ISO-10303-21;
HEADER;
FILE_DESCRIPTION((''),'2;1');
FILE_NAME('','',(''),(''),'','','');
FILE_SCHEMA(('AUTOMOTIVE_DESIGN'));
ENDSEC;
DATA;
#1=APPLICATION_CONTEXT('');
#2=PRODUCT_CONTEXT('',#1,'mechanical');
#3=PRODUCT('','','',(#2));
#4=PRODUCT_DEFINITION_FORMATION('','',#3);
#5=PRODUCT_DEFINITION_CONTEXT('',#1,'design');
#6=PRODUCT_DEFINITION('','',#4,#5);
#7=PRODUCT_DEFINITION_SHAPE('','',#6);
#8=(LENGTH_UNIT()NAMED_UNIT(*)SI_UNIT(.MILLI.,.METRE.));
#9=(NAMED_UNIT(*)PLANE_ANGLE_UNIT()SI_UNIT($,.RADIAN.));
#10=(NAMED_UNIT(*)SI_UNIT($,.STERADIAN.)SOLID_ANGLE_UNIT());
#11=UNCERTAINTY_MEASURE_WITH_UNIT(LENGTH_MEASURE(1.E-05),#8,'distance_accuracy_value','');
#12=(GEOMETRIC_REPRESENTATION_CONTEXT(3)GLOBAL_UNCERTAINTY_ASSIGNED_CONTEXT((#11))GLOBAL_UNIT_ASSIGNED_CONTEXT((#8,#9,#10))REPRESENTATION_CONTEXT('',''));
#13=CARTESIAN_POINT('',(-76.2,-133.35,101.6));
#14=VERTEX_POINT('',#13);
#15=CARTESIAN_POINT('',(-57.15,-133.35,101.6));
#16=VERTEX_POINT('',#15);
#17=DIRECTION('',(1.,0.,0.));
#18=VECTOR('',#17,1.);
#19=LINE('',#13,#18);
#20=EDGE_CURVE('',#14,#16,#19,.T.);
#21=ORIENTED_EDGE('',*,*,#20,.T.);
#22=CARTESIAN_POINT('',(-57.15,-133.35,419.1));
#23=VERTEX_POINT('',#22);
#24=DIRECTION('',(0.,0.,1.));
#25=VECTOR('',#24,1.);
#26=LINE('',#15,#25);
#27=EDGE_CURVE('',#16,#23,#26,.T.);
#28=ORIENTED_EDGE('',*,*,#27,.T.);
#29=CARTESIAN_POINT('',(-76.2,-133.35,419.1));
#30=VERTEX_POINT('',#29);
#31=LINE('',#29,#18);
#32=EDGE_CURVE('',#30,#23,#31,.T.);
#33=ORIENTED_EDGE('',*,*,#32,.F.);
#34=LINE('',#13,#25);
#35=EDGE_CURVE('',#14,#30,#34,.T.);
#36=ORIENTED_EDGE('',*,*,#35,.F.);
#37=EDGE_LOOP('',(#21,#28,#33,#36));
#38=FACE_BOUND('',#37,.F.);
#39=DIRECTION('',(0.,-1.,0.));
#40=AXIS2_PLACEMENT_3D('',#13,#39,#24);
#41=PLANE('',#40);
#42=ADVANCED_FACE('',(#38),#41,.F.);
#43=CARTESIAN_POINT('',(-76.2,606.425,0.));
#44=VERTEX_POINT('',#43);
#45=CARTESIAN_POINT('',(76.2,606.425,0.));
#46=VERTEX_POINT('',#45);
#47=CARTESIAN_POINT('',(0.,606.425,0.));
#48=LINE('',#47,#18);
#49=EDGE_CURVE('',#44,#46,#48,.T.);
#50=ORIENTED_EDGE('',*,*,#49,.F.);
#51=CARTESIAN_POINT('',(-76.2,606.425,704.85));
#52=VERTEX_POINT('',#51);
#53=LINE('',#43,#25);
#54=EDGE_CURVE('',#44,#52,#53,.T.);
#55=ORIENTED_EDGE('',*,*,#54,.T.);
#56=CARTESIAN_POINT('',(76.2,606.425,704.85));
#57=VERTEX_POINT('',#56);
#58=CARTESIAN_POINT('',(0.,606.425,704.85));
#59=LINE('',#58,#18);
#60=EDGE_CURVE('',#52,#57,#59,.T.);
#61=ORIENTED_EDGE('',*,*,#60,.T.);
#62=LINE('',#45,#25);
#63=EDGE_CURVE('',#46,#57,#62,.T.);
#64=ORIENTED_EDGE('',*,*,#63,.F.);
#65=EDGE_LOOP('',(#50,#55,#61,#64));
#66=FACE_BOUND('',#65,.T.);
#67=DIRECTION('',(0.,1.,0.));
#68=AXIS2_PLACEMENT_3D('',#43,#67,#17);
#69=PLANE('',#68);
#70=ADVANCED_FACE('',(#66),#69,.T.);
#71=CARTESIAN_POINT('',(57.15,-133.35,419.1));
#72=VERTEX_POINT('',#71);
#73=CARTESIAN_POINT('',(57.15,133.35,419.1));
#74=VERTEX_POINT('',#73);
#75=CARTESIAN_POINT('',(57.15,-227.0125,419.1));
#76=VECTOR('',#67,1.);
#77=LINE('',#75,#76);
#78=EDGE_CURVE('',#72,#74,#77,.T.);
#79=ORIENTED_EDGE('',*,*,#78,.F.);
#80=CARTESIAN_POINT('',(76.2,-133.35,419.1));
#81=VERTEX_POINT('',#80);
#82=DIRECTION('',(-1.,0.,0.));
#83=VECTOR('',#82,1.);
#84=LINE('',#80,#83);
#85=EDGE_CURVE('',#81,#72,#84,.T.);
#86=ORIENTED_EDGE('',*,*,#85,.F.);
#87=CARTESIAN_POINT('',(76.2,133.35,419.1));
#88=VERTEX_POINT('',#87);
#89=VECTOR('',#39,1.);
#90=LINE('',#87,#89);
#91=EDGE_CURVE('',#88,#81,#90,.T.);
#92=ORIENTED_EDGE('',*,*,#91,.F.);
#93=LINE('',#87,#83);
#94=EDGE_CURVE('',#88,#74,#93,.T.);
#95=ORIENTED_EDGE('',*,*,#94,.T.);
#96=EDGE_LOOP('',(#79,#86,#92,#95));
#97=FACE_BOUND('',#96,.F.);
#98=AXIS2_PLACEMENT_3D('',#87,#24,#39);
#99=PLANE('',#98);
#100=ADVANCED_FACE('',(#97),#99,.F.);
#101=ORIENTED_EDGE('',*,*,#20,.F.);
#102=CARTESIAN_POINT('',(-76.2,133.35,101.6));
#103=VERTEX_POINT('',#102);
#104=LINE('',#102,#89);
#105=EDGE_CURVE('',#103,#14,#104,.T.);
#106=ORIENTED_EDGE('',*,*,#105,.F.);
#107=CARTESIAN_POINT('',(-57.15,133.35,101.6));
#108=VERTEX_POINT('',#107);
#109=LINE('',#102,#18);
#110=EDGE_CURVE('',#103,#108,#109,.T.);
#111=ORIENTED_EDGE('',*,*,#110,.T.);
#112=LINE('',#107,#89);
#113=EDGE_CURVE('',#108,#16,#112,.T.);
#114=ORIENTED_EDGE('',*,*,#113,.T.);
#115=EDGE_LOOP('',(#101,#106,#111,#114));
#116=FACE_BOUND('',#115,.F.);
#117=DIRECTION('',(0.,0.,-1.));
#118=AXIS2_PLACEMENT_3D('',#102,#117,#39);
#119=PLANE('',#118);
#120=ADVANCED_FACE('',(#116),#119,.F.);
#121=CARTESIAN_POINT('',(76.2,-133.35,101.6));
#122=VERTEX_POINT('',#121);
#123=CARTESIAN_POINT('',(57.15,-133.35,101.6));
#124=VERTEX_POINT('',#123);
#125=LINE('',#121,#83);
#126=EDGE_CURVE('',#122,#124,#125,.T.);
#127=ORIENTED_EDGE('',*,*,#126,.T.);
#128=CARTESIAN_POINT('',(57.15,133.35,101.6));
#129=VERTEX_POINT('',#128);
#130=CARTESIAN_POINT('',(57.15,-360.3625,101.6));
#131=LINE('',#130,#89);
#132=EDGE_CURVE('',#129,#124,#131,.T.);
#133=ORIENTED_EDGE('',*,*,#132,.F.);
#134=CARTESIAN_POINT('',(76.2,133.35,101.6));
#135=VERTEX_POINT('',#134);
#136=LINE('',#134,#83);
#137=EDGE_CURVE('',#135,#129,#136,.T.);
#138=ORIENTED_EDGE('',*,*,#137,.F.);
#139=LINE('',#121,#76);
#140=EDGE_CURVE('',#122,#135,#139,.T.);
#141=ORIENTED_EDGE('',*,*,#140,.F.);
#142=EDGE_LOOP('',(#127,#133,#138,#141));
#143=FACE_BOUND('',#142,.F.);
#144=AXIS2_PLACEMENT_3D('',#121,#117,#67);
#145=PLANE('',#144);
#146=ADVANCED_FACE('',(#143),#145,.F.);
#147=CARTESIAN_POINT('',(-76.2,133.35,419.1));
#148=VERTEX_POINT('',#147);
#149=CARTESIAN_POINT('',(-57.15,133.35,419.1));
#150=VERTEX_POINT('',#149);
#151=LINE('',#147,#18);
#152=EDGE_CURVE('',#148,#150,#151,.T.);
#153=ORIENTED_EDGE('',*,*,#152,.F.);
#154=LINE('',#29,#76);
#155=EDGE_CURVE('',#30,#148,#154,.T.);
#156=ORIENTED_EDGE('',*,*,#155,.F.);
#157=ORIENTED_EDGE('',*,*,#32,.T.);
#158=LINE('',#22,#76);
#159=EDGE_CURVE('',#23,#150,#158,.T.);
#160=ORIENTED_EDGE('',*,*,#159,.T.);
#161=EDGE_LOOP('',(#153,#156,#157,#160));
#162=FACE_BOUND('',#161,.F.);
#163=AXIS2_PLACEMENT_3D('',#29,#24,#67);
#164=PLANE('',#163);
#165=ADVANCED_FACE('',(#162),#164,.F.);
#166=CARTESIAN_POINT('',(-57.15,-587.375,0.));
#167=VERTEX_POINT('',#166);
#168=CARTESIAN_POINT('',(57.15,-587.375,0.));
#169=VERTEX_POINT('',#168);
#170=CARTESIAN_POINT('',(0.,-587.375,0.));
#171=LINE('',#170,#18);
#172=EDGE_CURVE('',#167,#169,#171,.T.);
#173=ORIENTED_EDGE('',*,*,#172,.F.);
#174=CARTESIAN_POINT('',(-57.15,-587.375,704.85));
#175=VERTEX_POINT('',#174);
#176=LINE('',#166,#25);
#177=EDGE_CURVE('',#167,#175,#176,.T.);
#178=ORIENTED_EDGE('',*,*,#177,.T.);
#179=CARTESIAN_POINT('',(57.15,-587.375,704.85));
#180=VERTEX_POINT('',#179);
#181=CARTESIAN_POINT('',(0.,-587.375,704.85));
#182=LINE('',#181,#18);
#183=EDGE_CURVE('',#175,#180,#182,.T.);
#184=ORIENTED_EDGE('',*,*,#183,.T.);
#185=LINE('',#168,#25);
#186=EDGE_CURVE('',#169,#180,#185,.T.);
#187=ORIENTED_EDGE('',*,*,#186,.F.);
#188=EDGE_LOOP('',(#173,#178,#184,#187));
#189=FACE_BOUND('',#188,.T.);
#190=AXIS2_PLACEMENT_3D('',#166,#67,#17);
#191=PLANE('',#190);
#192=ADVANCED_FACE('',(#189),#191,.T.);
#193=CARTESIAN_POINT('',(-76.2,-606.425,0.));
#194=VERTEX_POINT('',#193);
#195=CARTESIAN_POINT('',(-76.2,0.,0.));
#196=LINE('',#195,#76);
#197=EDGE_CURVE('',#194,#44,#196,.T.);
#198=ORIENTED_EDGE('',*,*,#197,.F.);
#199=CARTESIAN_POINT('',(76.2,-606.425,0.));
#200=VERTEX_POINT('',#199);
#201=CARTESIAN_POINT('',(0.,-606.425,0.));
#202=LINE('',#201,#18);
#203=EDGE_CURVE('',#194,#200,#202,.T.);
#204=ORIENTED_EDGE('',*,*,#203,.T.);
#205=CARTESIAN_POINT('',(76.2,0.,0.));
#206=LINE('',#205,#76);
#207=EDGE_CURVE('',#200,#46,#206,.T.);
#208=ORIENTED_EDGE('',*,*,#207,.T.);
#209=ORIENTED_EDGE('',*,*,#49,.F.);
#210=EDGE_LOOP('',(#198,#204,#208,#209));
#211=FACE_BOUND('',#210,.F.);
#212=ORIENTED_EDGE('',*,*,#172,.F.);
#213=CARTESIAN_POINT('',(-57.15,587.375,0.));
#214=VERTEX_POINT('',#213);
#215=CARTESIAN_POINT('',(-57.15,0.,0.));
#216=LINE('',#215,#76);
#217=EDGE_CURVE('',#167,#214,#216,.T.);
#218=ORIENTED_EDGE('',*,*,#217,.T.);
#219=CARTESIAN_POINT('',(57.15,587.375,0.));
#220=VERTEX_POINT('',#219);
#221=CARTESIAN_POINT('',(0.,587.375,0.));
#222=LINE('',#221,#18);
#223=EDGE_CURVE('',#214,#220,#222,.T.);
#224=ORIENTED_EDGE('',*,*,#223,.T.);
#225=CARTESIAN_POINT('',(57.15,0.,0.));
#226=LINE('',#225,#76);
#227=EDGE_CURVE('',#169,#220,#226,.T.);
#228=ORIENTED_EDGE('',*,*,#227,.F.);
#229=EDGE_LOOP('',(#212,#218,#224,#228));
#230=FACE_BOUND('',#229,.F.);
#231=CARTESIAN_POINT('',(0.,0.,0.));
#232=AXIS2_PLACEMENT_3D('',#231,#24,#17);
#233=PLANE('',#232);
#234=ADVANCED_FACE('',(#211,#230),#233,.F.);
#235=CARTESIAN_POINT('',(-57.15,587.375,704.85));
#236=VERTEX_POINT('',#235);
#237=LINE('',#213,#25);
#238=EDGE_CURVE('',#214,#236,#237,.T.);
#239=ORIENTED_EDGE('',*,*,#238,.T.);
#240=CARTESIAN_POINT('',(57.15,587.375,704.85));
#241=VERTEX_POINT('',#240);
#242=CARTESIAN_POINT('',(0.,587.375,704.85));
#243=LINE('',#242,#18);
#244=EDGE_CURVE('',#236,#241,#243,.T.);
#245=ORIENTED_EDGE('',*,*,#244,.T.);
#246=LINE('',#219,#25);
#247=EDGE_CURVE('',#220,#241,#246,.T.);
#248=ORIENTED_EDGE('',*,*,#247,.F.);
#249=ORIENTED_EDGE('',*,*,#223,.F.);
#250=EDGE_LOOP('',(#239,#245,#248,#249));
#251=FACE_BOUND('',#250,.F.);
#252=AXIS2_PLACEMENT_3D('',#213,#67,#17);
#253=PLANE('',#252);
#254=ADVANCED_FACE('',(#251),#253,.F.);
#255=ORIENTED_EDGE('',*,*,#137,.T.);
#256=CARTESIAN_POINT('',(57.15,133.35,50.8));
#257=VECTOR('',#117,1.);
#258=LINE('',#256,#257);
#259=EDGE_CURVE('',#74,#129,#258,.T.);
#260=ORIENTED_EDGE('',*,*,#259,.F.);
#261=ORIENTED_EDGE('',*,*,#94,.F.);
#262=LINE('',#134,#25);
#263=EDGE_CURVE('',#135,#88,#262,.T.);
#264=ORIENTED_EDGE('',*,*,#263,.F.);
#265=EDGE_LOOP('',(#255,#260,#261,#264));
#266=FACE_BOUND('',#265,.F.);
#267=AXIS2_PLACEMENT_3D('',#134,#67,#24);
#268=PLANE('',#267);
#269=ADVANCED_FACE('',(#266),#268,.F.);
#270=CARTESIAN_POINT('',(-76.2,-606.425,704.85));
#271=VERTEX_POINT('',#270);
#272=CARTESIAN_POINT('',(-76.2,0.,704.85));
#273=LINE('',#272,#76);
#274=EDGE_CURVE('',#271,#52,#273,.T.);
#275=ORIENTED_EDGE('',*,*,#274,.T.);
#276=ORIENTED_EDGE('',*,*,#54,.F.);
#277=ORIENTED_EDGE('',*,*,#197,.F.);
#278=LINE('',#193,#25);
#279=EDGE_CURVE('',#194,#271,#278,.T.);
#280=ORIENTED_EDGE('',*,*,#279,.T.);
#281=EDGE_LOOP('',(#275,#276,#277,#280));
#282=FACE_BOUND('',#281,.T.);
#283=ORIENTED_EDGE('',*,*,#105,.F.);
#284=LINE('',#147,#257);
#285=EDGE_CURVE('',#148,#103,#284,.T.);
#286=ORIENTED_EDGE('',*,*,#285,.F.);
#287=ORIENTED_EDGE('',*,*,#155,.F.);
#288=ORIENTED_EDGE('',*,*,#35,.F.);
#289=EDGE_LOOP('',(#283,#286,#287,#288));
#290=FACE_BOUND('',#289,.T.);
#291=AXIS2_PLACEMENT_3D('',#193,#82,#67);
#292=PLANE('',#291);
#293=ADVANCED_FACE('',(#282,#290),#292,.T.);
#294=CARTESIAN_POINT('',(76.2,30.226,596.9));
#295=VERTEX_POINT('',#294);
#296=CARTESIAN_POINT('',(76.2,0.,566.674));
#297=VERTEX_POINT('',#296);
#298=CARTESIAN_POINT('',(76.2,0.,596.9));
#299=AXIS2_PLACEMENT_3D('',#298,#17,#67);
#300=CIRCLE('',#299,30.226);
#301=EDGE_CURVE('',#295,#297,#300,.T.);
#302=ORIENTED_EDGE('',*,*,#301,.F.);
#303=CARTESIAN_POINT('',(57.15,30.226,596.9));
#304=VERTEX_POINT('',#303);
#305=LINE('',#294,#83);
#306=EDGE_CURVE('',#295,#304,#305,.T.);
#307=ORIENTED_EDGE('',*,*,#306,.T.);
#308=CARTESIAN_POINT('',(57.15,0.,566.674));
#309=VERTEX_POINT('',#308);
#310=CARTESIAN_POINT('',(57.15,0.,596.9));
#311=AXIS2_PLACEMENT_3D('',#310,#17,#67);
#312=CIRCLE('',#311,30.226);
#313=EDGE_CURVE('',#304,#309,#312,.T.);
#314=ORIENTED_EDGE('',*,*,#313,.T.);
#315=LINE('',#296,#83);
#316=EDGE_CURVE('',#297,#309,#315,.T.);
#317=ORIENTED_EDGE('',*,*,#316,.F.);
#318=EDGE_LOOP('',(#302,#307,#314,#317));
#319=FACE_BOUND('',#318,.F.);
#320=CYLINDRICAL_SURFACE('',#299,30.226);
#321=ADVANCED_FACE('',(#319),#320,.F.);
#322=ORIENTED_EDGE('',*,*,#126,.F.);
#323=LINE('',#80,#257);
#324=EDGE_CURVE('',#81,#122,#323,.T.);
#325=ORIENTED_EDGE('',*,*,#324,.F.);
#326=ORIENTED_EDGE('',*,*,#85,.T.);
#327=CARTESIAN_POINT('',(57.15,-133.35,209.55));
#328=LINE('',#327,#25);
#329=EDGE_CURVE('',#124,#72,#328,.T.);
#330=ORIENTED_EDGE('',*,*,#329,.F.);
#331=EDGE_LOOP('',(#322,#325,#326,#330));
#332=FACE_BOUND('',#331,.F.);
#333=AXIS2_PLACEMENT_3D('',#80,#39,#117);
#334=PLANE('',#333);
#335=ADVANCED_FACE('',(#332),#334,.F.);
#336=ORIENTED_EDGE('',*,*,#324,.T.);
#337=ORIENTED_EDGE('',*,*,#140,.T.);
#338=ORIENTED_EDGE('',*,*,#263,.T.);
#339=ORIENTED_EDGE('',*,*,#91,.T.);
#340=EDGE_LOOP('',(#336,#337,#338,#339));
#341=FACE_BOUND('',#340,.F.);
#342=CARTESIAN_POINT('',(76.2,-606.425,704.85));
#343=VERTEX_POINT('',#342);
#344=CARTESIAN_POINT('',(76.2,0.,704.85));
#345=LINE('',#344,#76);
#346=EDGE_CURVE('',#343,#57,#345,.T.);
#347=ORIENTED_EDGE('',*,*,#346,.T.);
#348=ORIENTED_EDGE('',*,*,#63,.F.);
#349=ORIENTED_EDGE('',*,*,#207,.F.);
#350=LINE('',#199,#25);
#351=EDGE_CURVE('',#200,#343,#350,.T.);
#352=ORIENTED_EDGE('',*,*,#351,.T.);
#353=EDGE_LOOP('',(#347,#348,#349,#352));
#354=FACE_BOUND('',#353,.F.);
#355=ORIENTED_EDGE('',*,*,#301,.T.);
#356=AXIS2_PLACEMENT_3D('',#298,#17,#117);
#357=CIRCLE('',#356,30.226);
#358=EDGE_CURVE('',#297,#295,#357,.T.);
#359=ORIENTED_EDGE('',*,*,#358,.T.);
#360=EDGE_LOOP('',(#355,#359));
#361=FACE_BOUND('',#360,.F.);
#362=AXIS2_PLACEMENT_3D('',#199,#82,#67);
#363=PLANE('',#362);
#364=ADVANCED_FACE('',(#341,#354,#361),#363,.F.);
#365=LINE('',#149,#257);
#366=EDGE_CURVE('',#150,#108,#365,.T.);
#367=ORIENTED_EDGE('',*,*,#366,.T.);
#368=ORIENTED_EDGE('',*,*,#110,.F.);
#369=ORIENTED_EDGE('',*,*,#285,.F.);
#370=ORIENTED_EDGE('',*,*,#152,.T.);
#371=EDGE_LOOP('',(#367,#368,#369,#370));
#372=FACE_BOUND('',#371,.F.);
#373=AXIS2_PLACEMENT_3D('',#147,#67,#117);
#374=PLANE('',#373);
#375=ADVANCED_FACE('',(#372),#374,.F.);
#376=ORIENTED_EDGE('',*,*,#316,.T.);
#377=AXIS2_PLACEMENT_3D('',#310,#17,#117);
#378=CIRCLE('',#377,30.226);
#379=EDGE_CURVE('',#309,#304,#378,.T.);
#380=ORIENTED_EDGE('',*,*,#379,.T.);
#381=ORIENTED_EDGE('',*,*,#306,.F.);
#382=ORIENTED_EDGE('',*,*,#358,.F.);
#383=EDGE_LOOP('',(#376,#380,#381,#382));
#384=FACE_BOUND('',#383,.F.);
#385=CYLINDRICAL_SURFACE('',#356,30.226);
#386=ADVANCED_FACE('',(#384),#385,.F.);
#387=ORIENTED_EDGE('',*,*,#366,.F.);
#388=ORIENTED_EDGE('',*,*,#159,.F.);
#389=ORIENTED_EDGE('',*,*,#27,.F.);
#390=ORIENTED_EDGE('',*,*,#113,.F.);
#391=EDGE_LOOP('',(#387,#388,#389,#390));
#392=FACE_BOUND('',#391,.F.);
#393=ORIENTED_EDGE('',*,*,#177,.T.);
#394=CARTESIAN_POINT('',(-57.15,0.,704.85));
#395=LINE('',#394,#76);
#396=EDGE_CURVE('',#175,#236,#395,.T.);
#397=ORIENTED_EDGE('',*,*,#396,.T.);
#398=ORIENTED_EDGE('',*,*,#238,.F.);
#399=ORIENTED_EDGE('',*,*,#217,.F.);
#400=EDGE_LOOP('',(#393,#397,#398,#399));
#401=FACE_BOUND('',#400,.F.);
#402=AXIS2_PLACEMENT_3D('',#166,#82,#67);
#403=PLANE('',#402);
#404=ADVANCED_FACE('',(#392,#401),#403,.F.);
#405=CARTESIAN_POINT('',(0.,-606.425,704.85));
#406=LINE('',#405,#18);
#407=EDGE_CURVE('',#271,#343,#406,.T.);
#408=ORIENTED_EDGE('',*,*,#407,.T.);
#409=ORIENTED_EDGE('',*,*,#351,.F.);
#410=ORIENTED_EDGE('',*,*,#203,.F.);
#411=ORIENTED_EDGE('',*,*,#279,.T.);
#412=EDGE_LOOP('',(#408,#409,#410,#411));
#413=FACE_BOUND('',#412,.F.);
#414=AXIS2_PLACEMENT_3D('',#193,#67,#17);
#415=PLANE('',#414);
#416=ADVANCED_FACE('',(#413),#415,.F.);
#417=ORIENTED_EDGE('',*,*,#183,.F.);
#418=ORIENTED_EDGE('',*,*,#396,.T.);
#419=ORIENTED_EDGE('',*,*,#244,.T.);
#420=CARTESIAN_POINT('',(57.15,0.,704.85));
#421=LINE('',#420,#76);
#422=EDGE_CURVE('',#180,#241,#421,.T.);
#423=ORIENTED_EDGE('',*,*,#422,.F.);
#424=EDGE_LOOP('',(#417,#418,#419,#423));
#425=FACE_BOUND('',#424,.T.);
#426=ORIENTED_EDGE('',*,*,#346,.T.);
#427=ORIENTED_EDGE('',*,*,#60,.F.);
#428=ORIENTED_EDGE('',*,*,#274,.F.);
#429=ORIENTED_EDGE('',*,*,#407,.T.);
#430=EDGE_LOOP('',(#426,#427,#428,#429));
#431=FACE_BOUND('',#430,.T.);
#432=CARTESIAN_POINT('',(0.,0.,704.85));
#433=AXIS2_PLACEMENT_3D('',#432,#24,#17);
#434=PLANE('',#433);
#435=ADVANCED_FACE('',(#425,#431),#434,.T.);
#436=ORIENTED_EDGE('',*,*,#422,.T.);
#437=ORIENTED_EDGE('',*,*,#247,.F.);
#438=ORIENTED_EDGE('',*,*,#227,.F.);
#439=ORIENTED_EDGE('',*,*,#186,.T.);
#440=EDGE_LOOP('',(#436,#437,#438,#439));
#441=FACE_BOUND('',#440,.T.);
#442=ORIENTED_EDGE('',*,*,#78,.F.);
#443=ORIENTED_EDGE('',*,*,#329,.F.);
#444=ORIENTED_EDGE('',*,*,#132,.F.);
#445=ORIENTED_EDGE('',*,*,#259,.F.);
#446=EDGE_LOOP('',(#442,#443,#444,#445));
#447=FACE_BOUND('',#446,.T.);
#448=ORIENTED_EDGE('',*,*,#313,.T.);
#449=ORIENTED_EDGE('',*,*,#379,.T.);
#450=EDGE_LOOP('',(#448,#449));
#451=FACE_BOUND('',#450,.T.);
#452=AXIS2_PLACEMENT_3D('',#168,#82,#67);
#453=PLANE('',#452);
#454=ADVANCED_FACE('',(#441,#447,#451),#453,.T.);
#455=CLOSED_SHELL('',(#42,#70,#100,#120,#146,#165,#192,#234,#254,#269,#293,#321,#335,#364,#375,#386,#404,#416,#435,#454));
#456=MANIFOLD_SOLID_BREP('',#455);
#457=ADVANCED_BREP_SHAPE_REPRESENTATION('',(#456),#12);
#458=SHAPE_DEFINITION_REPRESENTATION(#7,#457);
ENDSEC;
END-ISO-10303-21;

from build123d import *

# Parameters (mm, degrees)
F0_W     = 152.4
F0_H     = 1212.85
F0_W_2   = 114.3
F0_H_2   = 1174.75
F1_DEPTH = 704.85
F3_DEPTH = 25.4
F5_DEPTH = 19.05


# Not quite as in the source:
# - a feature names something its author has since deleted; it is built from what else it names


with BuildPart() as f1:
    # F0 (on Top) → F1 (new body)
    with BuildSketch(Plane.XY):
        Rectangle(F0_W, F0_H)
        Rectangle(F0_W_2, F0_H_2, mode=Mode.SUBTRACT)
    extrude(amount=F1_DEPTH)

    # F2 (on face) → F3 (cut)
    with BuildSketch(Plane.YZ.offset(76.2)):
        with BuildLine():
            ThreePointArc((30.226, 596.9), (-21.3730095681, 618.2730095681), (0, 566.674))
            ThreePointArc((0, 566.674), (21.3730095681, 575.5269904319), (30.226, 596.9))
        make_face()
        Polygon((-133.35, 101.6), (0, 101.6), (133.35, 101.6), (133.35, 419.1), (0, 419.1), (-133.35, 419.1), align=None)
    extrude(amount=-F3_DEPTH, mode=Mode.SUBTRACT)

    # F4 (on face) → F5 (cut)
    with BuildSketch(Plane(origin=(-76.2, 0, 0), x_dir=(0, -1, 0), z_dir=(-1, 0, 0))):
        Polygon((-133.35, 101.6), (0, 101.6), (133.35, 101.6), (133.35, 419.1), (-133.35, 419.1), align=None)
    extrude(amount=-F5_DEPTH, mode=Mode.SUBTRACT)


solid = f1.part
